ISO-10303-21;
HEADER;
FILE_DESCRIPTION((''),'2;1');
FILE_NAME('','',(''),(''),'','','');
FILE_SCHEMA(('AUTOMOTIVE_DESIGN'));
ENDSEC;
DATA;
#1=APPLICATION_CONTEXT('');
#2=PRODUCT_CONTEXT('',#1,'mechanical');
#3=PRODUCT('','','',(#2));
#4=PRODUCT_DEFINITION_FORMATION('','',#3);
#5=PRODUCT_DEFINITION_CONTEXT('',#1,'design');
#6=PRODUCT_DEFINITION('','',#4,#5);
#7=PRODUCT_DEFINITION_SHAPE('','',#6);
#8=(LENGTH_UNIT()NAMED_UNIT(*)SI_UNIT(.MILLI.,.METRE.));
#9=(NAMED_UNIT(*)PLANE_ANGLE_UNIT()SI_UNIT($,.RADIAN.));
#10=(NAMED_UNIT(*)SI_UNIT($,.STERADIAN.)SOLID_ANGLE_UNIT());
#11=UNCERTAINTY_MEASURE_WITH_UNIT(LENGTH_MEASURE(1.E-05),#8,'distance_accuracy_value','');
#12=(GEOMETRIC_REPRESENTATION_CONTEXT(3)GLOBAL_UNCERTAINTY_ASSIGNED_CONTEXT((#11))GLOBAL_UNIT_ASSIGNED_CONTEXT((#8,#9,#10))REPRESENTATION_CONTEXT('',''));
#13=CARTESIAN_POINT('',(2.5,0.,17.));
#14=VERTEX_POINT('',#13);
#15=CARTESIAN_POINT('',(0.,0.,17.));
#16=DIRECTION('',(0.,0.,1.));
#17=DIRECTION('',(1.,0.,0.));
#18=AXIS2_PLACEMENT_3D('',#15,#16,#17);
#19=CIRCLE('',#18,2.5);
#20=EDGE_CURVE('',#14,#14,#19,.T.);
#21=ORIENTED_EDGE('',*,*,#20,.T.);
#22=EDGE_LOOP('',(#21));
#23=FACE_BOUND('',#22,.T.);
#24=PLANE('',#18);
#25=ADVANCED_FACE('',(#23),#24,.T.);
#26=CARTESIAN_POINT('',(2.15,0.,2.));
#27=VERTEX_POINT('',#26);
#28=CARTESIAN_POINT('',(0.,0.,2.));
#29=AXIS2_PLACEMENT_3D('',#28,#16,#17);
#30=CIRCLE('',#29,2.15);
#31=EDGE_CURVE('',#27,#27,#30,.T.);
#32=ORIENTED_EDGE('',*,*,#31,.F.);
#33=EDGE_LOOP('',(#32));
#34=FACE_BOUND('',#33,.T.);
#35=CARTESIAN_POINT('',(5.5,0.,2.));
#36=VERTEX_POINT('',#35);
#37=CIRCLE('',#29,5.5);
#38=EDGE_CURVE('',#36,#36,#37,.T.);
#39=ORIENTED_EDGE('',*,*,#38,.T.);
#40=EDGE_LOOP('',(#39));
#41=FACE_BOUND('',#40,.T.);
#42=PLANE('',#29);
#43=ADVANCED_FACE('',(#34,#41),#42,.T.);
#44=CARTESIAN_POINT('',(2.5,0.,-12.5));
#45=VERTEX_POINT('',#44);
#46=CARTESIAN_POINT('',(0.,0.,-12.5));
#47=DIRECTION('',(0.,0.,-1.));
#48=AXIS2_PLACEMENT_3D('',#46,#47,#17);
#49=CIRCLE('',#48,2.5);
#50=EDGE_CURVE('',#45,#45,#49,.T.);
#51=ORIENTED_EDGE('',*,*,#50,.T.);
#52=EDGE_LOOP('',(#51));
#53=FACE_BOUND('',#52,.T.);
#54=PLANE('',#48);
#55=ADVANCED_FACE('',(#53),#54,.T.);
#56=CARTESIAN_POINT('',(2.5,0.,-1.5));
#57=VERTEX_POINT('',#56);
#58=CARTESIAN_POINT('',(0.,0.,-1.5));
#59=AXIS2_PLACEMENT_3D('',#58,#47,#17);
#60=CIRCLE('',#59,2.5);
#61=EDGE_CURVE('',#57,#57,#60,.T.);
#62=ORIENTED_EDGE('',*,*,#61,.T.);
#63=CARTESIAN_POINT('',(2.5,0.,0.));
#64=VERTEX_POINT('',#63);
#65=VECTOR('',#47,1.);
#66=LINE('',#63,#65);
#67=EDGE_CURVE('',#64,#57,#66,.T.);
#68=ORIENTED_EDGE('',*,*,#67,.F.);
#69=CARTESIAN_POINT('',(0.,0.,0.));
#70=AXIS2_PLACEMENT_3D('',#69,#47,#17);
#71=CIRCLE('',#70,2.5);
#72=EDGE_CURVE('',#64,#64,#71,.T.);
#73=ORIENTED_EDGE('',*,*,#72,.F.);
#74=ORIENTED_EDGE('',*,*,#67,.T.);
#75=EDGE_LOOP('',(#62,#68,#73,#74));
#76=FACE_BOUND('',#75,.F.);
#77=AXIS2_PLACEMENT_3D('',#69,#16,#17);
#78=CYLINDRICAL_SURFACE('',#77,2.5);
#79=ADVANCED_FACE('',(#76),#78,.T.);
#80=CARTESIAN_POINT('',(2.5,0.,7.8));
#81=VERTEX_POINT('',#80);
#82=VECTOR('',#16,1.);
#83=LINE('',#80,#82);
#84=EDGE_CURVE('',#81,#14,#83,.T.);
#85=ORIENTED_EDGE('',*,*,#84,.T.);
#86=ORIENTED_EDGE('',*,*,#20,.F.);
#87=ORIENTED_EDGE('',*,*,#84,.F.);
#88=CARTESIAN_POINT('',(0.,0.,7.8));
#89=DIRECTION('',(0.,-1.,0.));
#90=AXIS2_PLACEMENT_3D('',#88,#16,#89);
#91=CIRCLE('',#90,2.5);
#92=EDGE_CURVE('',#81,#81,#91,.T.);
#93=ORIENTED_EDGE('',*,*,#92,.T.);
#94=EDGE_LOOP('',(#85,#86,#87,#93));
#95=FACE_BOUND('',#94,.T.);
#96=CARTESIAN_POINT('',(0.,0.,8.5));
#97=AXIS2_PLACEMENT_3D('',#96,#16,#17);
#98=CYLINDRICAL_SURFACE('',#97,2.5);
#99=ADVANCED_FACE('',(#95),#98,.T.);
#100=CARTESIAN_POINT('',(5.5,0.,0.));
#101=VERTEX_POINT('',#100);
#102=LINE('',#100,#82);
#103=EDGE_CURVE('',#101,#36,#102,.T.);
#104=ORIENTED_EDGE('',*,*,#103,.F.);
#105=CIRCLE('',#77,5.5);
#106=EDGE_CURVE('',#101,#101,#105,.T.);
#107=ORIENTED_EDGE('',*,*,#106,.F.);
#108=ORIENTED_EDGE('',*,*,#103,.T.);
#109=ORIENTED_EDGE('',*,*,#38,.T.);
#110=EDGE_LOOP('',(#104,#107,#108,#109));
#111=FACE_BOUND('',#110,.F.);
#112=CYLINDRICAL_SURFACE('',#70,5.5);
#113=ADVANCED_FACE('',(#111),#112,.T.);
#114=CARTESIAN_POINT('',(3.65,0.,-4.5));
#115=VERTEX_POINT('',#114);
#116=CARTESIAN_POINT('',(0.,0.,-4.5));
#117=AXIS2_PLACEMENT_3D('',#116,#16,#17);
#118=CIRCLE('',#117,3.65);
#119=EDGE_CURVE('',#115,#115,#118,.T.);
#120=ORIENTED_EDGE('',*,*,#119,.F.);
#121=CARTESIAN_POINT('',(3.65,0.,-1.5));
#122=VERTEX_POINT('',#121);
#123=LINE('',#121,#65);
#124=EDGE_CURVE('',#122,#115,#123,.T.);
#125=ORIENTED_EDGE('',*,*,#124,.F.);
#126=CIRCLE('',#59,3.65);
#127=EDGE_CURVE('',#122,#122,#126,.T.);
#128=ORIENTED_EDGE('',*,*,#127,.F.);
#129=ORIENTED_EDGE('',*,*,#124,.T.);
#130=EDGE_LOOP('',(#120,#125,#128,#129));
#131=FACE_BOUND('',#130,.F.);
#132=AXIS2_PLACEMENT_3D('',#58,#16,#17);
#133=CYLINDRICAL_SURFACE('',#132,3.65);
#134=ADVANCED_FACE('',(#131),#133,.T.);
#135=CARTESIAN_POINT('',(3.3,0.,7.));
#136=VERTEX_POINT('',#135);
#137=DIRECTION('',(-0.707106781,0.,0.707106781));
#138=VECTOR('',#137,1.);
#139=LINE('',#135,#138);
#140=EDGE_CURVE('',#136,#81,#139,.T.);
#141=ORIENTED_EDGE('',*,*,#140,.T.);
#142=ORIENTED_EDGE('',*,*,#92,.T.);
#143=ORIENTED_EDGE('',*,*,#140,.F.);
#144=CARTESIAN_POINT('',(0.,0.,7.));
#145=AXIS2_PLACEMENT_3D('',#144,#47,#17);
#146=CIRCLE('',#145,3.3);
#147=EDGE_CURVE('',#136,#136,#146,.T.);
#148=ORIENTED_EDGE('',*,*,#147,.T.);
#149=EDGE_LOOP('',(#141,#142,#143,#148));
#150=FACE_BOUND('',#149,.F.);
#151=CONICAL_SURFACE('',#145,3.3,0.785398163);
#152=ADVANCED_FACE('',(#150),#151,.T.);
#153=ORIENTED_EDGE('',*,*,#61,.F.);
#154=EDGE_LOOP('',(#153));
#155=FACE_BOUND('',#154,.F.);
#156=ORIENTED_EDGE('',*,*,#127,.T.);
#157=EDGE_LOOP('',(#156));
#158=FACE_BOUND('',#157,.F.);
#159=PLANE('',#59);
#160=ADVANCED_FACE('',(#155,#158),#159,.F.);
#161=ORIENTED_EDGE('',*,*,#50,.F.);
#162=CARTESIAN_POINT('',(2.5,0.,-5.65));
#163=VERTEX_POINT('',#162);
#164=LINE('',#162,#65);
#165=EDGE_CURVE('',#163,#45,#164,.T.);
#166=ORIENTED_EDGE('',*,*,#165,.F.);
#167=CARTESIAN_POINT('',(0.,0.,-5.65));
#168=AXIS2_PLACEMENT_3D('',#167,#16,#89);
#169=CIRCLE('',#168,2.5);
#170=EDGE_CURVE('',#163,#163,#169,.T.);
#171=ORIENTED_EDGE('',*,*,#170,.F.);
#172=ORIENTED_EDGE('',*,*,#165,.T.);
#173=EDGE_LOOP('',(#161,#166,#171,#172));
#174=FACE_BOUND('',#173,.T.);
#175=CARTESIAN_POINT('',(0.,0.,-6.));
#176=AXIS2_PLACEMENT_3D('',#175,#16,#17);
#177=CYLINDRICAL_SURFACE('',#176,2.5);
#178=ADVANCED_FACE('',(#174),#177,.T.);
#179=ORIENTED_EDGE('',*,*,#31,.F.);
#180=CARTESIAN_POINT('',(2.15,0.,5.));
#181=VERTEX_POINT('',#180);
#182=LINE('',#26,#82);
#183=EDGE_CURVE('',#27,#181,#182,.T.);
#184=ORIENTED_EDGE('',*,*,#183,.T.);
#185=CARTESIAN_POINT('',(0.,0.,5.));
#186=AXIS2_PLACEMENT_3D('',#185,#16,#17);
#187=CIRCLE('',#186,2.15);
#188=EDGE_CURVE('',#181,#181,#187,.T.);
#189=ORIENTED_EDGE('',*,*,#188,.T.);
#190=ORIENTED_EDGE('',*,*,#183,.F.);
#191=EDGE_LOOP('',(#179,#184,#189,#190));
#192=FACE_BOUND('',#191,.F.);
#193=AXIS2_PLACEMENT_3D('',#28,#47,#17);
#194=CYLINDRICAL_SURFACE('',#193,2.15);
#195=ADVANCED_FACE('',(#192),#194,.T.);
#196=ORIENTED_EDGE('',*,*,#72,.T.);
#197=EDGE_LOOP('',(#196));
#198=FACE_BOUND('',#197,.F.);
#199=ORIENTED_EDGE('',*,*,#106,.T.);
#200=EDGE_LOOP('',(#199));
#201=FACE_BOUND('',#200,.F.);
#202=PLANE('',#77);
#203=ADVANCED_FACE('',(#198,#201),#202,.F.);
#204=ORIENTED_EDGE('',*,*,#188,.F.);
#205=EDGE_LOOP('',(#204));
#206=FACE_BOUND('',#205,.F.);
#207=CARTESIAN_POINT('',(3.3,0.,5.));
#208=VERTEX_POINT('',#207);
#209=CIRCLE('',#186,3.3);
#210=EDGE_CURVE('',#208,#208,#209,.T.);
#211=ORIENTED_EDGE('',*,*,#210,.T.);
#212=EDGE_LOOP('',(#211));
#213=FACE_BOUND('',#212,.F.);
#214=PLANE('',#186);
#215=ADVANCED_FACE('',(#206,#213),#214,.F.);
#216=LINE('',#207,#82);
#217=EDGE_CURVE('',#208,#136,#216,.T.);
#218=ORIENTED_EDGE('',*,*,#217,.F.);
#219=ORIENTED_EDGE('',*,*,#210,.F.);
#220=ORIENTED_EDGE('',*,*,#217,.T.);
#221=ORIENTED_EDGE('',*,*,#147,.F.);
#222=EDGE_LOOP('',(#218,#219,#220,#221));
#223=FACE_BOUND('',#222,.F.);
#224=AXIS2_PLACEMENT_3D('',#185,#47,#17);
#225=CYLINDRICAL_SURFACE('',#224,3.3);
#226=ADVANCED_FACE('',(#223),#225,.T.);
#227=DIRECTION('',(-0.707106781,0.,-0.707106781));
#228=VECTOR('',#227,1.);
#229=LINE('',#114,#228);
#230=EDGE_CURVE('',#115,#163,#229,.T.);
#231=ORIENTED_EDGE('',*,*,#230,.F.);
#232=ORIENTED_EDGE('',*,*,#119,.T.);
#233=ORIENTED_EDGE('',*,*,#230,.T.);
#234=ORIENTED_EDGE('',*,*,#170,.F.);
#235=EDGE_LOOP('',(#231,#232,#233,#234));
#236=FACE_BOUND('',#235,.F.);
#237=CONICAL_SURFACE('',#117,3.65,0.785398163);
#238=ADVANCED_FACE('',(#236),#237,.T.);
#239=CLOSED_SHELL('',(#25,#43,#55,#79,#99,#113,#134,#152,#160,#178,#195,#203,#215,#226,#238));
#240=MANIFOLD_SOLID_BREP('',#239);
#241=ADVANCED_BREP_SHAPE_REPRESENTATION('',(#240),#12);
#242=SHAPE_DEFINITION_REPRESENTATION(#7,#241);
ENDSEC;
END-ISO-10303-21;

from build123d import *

# Parameters (mm, degrees)
F0_R         = 5.5
F1_DEPTH     = 2
F2_R         = 2.15
F3_DEPTH     = 3
F4_R         = 3.3
F5_DEPTH     = 12
F6_R         = 5
F6_R_2       = 2.5
F7_DEPTH     = 7
F8_S5_R      = 2.5
F8_T6_DEPTH  = 6
F9_R         = 2.5
F10_DEPTH    = 1.5
F11_R        = 3.65
F12_DEPTH    = 11
F13_R        = 5
F13_R_2      = 2.5
F14_DEPTH    = 5
F15_S5_R     = 2.5
F15_T6_DEPTH = 7


# Not quite as in the source:
# - a fillet or chamfer that OpenCascade refuses, or shapes differently, is made with other operations: its cross-section is extruded or revolved along the edge and cut away or added


with BuildPart() as f1:
    # F0 (on Top) → F1 (new body)
    with BuildSketch(Plane.XY):
        Circle(F0_R)
    extrude(amount=F1_DEPTH)

    # F2 (on face) → F3 (join)
    with BuildSketch(Plane.XY.offset(2)):
        Circle(F2_R)
    extrude(amount=F3_DEPTH)

    # F4 (on face) → F5 (join)
    with BuildSketch(Plane.XY.offset(5)):
        Circle(F4_R)
    extrude(amount=F5_DEPTH)

    # F6 (on face) → F7 (cut)
    with BuildSketch(Plane.XY.offset(17)):
        Circle(F6_R)
        Circle(F6_R_2, mode=Mode.SUBTRACT)
    extrude(amount=-F7_DEPTH, mode=Mode.SUBTRACT)

    # F8: chamfer of 3 on 1 edges, made by hand


with BuildPart() as f8_tool2:
    # F8_s3 → F8_t4 (revolve)
    with BuildSketch(Plane.XZ):
        Polygon((3.3, 7), (0.3, 10), (3.3, 10), align=None)
    revolve(axis=Axis((0, 0, 10), (0, 0, -1)))

    # F8_s5 → F8_t6 (cut, symmetric)
    with BuildSketch(Plane.XY.offset(8.5)):
        Circle(F8_S5_R)
    extrude(amount=F8_T6_DEPTH, both=True, mode=Mode.SUBTRACT)


with BuildPart() as f1_1:
    add(f1.part)

    # F8_t1: cut F8_tool2
    add(f8_tool2.part, mode=Mode.SUBTRACT)

    # F9 (on face) → F10 (join)
    with BuildSketch(Plane(origin=(0, 0, 0), x_dir=(1, 0, 0), z_dir=(0, 0, -1))):
        Circle(F9_R)
    extrude(amount=F10_DEPTH)

    # F11 (on face) → F12 (join)
    with BuildSketch(Plane(origin=(0, 0, -1.5), x_dir=(1, 0, 0), z_dir=(0, 0, -1))):
        Circle(F11_R)
    extrude(amount=F12_DEPTH)

    # F13 (on face) → F14 (cut)
    with BuildSketch(Plane(origin=(0, 0, -12.5), x_dir=(1, 0, 0), z_dir=(0, 0, -1))):
        Circle(F13_R)
        Circle(F13_R_2, mode=Mode.SUBTRACT)
    extrude(amount=-F14_DEPTH, mode=Mode.SUBTRACT)

    # F15: chamfer of 3 on 1 edges, made by hand


with BuildPart() as f15_tool2:
    # F15_s3 → F15_t4 (revolve)
    with BuildSketch(Plane.XZ):
        Polygon((3.65, -4.5), (0.65, -7.5), (3.65, -7.5), align=None)
    revolve(axis=Axis((0, 0, -7.5), (0, 0, 1)))

    # F15_s5 → F15_t6 (cut, symmetric)
    with BuildSketch(Plane.XY.offset(-6)):
        Circle(F15_S5_R)
    extrude(amount=F15_T6_DEPTH, both=True, mode=Mode.SUBTRACT)


with BuildPart() as f1_2:
    add(f1_1.part)

    # F15_t1: cut F15_tool2
    add(f15_tool2.part, mode=Mode.SUBTRACT)


solid = f1_2.part
